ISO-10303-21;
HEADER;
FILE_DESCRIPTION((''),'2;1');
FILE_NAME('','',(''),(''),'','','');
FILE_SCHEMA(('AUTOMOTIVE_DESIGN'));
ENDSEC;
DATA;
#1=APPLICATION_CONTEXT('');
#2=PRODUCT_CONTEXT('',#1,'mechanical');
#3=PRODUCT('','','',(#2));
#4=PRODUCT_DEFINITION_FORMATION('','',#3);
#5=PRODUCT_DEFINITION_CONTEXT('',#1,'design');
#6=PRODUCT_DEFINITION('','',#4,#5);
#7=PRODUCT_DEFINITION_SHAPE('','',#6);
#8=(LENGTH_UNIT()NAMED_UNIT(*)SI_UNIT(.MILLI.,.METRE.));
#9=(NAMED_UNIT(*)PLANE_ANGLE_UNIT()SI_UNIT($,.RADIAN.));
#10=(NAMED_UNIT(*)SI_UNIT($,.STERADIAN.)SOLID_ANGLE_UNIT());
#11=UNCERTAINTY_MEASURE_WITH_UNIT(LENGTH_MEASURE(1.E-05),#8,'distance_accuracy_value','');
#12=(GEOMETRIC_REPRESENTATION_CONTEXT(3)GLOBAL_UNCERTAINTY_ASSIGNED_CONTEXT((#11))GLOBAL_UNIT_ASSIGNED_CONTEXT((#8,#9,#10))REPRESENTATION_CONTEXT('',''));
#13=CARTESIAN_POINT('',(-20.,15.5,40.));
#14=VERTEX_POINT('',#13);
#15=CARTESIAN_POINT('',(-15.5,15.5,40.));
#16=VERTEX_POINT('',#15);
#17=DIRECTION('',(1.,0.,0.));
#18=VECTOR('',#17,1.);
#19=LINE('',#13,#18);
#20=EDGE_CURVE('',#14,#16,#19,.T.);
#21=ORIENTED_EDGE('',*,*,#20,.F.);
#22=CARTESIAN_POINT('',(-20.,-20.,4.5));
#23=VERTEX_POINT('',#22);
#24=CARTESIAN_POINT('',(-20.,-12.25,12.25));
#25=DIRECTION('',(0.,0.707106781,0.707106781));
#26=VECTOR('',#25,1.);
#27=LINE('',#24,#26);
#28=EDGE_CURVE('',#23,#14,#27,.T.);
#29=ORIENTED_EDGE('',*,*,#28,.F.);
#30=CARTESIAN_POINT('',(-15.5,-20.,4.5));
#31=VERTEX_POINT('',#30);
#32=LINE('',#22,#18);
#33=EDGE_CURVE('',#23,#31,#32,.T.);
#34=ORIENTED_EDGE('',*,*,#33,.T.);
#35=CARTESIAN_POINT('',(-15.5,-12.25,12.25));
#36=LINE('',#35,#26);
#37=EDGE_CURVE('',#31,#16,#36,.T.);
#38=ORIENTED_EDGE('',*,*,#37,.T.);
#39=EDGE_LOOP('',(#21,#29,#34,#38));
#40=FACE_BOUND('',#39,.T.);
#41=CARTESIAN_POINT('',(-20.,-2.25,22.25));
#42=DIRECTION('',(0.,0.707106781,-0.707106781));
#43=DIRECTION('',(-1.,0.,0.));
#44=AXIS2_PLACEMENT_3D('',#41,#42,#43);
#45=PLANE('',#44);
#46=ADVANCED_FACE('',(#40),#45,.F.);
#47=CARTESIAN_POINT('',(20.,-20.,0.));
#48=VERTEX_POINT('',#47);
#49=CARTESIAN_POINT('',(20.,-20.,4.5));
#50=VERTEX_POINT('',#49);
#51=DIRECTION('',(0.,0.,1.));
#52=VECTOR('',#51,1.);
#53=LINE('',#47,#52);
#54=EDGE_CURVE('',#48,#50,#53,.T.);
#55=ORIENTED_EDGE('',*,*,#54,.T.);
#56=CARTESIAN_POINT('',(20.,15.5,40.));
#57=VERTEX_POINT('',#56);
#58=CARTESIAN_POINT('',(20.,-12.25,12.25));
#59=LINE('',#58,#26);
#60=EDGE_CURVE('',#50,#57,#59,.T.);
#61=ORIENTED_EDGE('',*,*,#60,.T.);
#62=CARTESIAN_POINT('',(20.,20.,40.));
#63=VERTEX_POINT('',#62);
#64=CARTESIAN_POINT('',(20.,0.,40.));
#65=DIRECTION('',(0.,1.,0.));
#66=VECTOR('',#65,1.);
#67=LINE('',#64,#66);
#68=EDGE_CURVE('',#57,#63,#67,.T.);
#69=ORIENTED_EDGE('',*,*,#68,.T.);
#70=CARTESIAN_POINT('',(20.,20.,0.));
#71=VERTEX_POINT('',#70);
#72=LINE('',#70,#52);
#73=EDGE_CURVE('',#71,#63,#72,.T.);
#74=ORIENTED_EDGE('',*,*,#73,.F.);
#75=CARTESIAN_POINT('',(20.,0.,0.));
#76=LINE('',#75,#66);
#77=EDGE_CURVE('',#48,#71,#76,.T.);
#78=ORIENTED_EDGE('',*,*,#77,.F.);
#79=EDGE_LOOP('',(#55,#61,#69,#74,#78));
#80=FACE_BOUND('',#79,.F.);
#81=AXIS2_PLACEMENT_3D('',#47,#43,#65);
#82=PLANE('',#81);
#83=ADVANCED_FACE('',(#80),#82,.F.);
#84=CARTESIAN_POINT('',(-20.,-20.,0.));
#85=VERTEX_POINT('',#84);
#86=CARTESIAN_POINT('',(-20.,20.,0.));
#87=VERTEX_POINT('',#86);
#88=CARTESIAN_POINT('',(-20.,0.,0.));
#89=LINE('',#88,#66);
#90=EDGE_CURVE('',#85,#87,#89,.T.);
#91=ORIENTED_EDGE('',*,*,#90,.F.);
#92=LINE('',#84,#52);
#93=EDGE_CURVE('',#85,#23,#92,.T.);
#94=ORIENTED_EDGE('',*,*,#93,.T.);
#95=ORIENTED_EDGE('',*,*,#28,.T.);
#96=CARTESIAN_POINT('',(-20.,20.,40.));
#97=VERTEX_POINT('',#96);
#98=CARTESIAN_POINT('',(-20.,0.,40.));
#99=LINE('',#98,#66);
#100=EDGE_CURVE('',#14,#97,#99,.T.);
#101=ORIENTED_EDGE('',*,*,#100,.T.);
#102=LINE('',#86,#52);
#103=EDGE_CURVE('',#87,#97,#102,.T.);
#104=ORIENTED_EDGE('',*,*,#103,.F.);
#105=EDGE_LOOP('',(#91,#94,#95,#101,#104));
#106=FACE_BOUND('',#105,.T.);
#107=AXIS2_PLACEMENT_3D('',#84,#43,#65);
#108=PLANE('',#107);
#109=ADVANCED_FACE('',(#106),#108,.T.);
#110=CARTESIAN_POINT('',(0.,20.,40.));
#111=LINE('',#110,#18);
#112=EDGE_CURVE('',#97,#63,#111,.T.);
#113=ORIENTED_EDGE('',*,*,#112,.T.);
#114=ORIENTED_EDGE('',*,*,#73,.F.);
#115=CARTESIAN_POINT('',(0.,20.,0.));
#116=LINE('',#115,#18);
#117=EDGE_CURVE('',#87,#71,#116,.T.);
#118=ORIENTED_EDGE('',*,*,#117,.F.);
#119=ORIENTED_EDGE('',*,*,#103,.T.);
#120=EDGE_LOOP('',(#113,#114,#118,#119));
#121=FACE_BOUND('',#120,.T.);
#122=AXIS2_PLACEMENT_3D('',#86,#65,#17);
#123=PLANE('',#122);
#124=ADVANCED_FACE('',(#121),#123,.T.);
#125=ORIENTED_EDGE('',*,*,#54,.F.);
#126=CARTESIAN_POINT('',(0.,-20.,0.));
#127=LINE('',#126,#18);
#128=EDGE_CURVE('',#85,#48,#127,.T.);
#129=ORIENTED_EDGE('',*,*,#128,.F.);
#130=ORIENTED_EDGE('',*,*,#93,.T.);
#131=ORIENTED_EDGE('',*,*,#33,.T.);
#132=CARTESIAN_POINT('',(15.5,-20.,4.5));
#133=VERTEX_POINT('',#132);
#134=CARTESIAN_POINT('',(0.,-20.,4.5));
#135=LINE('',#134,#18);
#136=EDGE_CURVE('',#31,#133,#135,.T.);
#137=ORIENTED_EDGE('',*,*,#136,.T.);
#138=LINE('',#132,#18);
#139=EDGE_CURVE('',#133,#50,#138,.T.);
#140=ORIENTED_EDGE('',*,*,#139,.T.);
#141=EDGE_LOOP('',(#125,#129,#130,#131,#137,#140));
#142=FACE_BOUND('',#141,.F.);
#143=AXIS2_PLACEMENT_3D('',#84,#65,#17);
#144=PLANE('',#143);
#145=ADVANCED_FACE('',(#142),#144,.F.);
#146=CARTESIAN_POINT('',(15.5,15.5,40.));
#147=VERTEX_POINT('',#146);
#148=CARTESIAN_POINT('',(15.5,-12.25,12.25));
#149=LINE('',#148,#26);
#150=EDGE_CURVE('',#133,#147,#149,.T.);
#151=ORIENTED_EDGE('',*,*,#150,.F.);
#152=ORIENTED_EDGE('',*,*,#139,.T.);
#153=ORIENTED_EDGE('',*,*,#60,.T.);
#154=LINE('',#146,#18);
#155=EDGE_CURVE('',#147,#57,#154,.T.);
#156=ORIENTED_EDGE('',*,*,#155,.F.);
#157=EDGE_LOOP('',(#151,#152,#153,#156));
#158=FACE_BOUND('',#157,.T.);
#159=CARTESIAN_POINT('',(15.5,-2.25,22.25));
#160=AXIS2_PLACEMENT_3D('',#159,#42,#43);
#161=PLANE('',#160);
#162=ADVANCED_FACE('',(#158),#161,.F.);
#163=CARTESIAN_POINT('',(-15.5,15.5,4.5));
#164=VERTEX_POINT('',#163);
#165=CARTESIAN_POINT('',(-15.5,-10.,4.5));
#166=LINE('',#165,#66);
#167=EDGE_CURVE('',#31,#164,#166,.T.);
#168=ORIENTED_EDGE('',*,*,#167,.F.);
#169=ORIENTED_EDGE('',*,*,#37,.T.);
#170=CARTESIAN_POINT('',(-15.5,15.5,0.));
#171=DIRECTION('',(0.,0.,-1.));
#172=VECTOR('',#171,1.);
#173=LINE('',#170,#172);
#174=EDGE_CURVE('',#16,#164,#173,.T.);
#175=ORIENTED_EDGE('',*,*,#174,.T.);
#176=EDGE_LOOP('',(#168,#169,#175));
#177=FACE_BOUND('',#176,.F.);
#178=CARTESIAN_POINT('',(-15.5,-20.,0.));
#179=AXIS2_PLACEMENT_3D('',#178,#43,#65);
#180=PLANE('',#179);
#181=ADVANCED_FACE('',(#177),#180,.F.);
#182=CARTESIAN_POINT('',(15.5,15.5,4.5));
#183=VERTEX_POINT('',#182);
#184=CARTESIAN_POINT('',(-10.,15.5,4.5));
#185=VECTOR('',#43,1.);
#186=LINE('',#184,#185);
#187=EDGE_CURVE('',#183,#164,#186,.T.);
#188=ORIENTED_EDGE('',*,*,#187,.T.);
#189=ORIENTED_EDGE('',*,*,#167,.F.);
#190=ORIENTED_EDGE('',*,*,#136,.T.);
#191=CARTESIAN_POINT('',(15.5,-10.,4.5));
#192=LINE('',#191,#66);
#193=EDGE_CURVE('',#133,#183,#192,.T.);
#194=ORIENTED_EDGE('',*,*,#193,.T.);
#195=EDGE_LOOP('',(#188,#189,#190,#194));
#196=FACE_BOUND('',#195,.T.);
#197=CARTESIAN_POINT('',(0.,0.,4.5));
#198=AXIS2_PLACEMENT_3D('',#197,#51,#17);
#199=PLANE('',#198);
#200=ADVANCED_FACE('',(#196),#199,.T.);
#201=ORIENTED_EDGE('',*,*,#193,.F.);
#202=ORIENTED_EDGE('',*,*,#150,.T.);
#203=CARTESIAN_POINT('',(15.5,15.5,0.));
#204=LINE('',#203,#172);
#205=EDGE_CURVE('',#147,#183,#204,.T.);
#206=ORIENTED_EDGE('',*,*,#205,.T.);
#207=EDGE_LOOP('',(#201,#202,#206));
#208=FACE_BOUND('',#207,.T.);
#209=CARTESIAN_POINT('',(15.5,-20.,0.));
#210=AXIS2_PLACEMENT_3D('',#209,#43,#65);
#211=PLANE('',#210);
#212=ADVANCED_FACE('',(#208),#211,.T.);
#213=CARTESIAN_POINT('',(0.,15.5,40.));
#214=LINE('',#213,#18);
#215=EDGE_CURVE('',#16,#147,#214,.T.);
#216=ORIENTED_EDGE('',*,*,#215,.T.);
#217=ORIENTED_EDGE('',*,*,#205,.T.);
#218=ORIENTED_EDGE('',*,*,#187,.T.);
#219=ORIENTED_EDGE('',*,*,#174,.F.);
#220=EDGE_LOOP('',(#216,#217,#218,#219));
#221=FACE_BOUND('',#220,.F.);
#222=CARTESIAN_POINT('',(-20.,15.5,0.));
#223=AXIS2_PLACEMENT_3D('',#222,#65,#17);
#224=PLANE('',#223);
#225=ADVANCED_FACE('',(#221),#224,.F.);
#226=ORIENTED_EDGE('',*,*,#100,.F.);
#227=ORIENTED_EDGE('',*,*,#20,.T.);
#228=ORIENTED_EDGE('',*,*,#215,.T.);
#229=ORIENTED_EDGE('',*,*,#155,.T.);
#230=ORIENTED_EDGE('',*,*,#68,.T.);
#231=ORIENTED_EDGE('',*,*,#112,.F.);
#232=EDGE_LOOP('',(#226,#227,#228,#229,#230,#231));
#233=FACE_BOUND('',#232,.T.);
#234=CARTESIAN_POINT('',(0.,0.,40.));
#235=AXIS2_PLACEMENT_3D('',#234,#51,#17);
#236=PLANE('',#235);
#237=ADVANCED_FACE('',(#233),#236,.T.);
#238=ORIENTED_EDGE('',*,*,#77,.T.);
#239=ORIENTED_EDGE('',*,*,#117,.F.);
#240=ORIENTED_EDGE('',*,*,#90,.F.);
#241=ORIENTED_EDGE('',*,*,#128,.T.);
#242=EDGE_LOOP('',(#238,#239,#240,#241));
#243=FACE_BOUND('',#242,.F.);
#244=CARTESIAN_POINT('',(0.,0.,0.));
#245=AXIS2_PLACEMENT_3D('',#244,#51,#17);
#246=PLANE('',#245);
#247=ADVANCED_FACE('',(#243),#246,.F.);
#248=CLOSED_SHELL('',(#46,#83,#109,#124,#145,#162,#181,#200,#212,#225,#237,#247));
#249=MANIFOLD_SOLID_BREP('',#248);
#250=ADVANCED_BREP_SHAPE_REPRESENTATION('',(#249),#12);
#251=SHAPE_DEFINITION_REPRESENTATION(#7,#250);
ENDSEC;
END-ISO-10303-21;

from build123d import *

# Parameters (mm, degrees)
F0_W     = 40
F0_H     = 40
F1_DEPTH = 40
F2_T     = -4.5
F3_SIZE  = 35.5


with BuildPart() as f1:
    # F0 (on Top) → F1 (new body)
    with BuildSketch(Plane.XY):
        Rectangle(F0_W, F0_H)
    extrude(amount=F1_DEPTH)

    # F2
    f2_openings = [f1.faces().sort_by_distance(p)[0] for p in [
        (0, -20, 20),
        (0, 0, 40),
    ]]
    offset(amount=F2_T, openings=f2_openings)

    # F3
    f3_edges = [f1.edges().sort_by_distance(p)[0] for p in [
        (-17.75, -20, 40),
        (17.75, -20, 40),
    ]]
    chamfer(f3_edges, length=F3_SIZE)


solid = f1.part
